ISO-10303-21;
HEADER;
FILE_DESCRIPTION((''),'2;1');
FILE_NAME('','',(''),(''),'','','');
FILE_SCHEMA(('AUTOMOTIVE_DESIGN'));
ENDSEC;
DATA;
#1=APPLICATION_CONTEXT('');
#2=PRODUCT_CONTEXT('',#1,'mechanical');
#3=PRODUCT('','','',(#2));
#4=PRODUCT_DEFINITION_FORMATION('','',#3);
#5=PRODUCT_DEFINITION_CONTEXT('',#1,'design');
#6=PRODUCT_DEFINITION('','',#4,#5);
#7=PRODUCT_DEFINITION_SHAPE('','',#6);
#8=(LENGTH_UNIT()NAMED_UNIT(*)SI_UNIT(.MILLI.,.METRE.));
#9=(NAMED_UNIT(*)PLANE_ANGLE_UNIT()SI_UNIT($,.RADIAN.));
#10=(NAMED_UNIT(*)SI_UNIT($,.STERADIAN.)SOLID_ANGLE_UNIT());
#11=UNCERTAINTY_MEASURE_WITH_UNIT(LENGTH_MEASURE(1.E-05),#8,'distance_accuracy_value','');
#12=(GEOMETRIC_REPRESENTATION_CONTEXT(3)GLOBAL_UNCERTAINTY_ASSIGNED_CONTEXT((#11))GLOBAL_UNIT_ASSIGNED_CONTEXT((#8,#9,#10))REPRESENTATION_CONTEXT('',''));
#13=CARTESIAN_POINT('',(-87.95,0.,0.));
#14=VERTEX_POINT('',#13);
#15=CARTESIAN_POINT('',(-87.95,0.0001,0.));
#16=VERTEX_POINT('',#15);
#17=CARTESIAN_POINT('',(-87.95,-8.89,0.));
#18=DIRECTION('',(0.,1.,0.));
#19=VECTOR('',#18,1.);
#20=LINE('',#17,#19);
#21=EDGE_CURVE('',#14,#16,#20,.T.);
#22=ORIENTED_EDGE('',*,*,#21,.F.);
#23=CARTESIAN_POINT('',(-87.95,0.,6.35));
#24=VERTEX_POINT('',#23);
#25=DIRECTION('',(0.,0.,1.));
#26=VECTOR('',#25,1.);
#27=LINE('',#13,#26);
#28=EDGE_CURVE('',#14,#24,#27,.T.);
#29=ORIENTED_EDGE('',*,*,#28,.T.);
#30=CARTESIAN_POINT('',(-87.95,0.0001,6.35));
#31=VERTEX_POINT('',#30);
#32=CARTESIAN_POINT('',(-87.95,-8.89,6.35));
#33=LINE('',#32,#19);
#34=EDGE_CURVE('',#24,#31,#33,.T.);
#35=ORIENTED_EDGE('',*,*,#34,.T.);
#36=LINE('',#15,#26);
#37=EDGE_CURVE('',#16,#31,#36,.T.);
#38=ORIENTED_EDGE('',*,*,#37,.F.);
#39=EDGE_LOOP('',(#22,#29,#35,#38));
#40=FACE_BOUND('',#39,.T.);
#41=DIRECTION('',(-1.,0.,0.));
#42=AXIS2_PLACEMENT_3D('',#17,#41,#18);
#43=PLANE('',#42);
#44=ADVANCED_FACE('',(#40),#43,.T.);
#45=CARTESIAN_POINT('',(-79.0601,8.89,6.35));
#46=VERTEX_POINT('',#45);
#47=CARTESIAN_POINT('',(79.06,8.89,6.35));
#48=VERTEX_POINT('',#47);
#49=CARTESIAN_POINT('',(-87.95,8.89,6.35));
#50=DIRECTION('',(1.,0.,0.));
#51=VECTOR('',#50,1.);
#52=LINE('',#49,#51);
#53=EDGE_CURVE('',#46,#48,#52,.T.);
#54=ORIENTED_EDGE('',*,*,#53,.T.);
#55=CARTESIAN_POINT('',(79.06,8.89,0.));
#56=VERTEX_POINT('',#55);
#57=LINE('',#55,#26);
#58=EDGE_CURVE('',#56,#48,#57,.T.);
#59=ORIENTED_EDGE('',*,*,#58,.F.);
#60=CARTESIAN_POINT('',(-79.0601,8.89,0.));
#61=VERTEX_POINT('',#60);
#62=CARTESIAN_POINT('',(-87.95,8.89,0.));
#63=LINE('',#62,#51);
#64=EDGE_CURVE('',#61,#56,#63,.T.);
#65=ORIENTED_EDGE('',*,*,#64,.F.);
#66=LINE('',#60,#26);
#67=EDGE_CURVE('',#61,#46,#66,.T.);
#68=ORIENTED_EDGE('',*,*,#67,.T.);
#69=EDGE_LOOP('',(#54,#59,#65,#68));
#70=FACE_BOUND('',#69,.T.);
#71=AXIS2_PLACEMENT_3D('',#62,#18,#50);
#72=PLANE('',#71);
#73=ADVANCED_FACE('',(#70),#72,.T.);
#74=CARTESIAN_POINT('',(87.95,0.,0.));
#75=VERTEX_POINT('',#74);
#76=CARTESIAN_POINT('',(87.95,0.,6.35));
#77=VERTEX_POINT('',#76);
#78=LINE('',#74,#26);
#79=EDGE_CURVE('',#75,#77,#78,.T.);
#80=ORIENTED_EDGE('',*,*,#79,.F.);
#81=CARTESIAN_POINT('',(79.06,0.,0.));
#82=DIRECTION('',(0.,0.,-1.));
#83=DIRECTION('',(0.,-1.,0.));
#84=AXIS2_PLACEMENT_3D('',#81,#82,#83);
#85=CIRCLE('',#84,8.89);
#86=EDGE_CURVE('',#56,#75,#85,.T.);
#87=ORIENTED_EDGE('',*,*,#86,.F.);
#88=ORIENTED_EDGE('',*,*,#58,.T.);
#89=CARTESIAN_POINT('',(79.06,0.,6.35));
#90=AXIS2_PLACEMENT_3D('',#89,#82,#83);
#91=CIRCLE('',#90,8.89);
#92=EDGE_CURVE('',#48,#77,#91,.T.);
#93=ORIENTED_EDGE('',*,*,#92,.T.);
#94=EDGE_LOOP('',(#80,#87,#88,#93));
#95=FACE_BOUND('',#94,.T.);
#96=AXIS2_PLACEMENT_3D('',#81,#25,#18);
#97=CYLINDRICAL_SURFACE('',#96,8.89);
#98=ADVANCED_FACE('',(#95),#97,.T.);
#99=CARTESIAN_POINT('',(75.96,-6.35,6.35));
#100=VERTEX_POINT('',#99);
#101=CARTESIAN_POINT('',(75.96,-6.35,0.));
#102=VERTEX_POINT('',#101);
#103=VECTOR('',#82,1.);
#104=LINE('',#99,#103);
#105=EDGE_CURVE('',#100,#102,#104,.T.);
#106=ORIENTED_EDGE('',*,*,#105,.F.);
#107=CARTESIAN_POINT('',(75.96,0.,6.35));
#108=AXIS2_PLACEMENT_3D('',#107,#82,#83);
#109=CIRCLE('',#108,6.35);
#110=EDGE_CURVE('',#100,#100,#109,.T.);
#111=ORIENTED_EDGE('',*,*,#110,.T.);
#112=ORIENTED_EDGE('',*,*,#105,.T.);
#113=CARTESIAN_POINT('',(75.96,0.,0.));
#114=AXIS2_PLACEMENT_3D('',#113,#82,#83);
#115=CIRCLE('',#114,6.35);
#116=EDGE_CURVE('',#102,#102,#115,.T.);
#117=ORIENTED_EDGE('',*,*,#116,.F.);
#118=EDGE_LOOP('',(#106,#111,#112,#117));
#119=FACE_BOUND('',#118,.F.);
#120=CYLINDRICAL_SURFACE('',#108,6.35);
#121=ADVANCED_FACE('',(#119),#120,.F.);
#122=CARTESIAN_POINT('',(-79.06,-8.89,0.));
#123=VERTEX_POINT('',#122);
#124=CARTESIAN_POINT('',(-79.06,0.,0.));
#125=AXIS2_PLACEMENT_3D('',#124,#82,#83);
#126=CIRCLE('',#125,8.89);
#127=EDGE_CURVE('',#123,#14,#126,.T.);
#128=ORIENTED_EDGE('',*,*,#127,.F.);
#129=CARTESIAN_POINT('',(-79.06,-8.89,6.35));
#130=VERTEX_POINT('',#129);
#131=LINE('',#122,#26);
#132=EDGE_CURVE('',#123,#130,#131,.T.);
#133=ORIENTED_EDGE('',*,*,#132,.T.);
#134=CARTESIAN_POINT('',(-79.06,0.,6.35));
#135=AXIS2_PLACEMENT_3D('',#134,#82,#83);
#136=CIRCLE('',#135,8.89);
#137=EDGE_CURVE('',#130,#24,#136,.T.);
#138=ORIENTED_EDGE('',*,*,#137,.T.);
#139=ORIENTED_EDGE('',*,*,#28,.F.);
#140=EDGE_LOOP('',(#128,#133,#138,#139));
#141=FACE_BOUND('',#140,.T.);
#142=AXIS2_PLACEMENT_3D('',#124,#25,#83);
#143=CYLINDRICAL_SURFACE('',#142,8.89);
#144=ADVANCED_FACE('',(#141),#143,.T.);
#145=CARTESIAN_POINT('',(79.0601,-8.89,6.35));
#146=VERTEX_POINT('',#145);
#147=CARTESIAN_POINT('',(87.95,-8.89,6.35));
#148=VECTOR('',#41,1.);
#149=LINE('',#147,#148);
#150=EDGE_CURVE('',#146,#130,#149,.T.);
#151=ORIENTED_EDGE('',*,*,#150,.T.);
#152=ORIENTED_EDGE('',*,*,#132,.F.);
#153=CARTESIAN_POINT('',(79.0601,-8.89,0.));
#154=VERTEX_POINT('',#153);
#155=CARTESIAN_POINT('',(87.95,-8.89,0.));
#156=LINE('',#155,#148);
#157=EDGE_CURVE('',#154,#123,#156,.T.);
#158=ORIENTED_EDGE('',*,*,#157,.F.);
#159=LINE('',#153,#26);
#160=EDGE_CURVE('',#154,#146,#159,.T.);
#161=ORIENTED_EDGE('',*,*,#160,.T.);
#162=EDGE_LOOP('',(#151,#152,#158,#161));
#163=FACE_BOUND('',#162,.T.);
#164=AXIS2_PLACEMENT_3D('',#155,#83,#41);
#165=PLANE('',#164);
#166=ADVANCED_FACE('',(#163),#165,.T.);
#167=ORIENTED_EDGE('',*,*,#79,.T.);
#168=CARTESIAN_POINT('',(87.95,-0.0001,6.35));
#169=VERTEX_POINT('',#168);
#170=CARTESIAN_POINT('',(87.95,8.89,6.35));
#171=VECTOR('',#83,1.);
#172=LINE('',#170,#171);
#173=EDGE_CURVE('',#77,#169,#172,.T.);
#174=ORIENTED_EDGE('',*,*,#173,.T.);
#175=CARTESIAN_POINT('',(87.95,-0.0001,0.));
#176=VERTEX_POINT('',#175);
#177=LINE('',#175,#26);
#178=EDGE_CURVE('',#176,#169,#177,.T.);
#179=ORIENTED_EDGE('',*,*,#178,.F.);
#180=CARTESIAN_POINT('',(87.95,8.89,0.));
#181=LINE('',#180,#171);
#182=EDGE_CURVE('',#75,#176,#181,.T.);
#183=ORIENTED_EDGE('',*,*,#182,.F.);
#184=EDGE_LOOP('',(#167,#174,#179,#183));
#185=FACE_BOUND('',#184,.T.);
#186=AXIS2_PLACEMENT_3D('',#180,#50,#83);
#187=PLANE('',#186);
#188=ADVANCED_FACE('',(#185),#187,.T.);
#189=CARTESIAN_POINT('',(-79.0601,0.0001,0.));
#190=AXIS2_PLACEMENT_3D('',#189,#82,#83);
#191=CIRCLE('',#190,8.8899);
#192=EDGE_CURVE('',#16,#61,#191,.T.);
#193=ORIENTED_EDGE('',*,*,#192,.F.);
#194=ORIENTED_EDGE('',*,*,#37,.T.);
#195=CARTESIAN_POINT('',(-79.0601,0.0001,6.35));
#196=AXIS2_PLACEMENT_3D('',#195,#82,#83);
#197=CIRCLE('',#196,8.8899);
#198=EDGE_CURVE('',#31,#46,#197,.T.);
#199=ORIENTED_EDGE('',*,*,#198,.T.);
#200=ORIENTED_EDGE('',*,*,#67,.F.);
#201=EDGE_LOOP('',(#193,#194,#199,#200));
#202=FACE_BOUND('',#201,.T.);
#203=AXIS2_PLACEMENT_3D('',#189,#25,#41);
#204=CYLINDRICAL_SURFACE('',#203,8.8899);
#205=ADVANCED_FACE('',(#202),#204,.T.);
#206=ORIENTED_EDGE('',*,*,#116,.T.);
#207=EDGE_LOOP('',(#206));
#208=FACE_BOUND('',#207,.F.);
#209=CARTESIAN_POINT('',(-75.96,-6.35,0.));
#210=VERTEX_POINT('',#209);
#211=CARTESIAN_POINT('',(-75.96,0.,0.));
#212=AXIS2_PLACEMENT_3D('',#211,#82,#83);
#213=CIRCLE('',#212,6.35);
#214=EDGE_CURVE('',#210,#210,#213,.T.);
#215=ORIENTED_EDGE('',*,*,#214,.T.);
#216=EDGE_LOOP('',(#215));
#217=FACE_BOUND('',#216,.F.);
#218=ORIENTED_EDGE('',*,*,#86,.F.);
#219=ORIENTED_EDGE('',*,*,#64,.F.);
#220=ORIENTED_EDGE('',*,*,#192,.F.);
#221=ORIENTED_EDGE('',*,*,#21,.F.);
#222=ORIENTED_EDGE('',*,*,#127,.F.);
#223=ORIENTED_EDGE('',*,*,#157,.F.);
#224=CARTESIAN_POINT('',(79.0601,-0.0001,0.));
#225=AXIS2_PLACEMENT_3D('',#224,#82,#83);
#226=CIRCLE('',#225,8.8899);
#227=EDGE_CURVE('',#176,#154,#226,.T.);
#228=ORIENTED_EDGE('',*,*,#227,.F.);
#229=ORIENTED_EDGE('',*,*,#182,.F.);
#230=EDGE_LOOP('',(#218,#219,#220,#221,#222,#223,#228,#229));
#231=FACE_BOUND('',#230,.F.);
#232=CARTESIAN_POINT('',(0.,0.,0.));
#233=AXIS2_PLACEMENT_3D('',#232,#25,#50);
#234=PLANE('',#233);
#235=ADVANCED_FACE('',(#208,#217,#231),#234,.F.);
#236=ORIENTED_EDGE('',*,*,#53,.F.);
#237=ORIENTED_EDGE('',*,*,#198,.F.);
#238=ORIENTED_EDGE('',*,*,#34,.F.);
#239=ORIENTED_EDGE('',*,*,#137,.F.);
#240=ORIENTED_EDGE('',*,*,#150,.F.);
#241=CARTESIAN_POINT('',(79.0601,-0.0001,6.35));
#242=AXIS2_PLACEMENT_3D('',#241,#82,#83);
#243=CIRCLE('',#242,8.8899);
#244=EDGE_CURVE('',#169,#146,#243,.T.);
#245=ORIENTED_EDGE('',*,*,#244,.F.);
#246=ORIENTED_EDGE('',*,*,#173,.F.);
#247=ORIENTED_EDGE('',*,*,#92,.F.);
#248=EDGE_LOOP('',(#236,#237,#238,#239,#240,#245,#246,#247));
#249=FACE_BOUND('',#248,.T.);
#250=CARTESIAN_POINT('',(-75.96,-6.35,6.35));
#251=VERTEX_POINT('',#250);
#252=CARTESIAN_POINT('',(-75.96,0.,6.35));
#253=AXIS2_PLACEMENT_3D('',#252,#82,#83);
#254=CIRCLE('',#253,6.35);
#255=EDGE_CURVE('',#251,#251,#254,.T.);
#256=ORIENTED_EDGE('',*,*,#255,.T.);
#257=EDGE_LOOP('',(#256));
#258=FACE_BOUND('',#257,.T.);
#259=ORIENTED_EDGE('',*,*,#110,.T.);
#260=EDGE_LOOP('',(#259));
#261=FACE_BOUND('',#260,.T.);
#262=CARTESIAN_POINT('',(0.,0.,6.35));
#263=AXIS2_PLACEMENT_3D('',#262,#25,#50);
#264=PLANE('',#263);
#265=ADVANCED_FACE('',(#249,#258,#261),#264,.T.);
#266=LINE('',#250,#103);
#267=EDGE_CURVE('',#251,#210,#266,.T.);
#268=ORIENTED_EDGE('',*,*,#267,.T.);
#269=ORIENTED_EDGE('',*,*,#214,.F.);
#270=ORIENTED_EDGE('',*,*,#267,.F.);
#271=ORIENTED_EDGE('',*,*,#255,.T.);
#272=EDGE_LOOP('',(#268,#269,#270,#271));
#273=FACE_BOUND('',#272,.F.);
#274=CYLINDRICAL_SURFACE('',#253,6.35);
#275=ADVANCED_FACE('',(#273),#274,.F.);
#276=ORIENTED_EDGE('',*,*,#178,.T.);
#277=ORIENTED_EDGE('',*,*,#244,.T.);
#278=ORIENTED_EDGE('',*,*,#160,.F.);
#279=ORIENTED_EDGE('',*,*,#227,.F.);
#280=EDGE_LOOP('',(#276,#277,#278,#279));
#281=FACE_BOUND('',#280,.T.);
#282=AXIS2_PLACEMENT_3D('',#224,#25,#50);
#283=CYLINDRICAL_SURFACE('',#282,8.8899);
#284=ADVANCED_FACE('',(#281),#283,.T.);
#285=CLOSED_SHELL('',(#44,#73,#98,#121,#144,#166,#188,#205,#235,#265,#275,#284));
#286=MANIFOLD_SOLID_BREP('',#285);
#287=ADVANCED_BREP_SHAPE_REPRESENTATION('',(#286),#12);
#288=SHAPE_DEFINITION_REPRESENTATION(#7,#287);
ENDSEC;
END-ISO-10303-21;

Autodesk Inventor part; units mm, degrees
ref_plane "YZ Plane" through (0, 0, 0) normal (1, 0, 0) x (0, 1, 0)
ref_plane "XZ Plane" through (0, 0, 0) normal (0, 1, 0) x (-1, 0, 0)
ref_plane "XY Plane" through (0, 0, 0) normal (0, 0, 1) x (1, 0, 0)
sketch "Sketch1" plane through (0, 0, 0) normal (0, 0, 1) x (1, 0, 0)
  line L0 (-87.95, 8.89) -> (87.95, 8.89)
  line L1 (87.95, 8.89) -> (87.95, -8.89)
  line L2 (87.95, -8.89) -> (-87.95, -8.89)
  line L3 (-87.95, -8.89) -> (-87.95, 8.89)
  line L4 (-87.95, 8.89) -> (87.95, -8.89) construction
  line L5 (87.95, 8.89) -> (-87.95, -8.89) construction
  point P0 (0, 0)
  dimension "d0" = 175.9
  dimension "d1" = 17.78
extrude "Extrusion1" add sketch "Sketch1" along normal blind 6.35
fillet "Fillet1" radius 8.89 1 edges at (87.95, 8.89, 3.175)
fillet "Fillet2" radius 8.89 1 edges at (87.95, -8.89, 3.175)
fillet "Fillet3" radius 8.89 1 edges at (-87.95, -8.89, 3.175)
fillet "Fillet4" radius 8.89 1 edges at (-87.95, 8.89, 3.175)
sketch "Sketch2" plane through (0, 0, 6.35) normal (0, 0, 1) x (1, 0, 0)
  arc A0 (79.06, -8.89) -> (79.06, 8.89) centre (79.06, 0) ccw projected
  circle A1 centre (-75.96, 0) radius 6.35
  circle A2 centre (75.96, 0) radius 6.35
  arc A3 (-79.06, 8.89) -> (-79.06, -8.89) centre (-79.06, 0) ccw projected
  point P0 (0, 0)
  dimension "d10" = 12.7
  dimension "d12" = 12.7
  dimension "d13" = 3.1
  dimension "d14" = 3.1
hole "Hole1" at (-75.96, 0, 6.35) at (75.96, 0, 6.35) direction (0, 0, -1) diameter 12.7 end through all
equation "\"d20\" = Thickness"
equation "\"BendRadius\" = Thickness"
equation "\"BendReliefWidth\" = Thickness"
equation "\"BendReliefDepth\" = 0.5 * Thickness"
equation "\"CornerReliefSize\" = 4 * Thickness"
equation "\"MinimumRemnant\" = 2 * Thickness"
equation "\"TransitionRadius\" = BendRadius"
equation "\"JacobiRadiusSize\" = BendRadius"
equation "\"GapSize\" = Thickness"
equation "\"Thickness\" = 3.048"
properties part number "crank part"
